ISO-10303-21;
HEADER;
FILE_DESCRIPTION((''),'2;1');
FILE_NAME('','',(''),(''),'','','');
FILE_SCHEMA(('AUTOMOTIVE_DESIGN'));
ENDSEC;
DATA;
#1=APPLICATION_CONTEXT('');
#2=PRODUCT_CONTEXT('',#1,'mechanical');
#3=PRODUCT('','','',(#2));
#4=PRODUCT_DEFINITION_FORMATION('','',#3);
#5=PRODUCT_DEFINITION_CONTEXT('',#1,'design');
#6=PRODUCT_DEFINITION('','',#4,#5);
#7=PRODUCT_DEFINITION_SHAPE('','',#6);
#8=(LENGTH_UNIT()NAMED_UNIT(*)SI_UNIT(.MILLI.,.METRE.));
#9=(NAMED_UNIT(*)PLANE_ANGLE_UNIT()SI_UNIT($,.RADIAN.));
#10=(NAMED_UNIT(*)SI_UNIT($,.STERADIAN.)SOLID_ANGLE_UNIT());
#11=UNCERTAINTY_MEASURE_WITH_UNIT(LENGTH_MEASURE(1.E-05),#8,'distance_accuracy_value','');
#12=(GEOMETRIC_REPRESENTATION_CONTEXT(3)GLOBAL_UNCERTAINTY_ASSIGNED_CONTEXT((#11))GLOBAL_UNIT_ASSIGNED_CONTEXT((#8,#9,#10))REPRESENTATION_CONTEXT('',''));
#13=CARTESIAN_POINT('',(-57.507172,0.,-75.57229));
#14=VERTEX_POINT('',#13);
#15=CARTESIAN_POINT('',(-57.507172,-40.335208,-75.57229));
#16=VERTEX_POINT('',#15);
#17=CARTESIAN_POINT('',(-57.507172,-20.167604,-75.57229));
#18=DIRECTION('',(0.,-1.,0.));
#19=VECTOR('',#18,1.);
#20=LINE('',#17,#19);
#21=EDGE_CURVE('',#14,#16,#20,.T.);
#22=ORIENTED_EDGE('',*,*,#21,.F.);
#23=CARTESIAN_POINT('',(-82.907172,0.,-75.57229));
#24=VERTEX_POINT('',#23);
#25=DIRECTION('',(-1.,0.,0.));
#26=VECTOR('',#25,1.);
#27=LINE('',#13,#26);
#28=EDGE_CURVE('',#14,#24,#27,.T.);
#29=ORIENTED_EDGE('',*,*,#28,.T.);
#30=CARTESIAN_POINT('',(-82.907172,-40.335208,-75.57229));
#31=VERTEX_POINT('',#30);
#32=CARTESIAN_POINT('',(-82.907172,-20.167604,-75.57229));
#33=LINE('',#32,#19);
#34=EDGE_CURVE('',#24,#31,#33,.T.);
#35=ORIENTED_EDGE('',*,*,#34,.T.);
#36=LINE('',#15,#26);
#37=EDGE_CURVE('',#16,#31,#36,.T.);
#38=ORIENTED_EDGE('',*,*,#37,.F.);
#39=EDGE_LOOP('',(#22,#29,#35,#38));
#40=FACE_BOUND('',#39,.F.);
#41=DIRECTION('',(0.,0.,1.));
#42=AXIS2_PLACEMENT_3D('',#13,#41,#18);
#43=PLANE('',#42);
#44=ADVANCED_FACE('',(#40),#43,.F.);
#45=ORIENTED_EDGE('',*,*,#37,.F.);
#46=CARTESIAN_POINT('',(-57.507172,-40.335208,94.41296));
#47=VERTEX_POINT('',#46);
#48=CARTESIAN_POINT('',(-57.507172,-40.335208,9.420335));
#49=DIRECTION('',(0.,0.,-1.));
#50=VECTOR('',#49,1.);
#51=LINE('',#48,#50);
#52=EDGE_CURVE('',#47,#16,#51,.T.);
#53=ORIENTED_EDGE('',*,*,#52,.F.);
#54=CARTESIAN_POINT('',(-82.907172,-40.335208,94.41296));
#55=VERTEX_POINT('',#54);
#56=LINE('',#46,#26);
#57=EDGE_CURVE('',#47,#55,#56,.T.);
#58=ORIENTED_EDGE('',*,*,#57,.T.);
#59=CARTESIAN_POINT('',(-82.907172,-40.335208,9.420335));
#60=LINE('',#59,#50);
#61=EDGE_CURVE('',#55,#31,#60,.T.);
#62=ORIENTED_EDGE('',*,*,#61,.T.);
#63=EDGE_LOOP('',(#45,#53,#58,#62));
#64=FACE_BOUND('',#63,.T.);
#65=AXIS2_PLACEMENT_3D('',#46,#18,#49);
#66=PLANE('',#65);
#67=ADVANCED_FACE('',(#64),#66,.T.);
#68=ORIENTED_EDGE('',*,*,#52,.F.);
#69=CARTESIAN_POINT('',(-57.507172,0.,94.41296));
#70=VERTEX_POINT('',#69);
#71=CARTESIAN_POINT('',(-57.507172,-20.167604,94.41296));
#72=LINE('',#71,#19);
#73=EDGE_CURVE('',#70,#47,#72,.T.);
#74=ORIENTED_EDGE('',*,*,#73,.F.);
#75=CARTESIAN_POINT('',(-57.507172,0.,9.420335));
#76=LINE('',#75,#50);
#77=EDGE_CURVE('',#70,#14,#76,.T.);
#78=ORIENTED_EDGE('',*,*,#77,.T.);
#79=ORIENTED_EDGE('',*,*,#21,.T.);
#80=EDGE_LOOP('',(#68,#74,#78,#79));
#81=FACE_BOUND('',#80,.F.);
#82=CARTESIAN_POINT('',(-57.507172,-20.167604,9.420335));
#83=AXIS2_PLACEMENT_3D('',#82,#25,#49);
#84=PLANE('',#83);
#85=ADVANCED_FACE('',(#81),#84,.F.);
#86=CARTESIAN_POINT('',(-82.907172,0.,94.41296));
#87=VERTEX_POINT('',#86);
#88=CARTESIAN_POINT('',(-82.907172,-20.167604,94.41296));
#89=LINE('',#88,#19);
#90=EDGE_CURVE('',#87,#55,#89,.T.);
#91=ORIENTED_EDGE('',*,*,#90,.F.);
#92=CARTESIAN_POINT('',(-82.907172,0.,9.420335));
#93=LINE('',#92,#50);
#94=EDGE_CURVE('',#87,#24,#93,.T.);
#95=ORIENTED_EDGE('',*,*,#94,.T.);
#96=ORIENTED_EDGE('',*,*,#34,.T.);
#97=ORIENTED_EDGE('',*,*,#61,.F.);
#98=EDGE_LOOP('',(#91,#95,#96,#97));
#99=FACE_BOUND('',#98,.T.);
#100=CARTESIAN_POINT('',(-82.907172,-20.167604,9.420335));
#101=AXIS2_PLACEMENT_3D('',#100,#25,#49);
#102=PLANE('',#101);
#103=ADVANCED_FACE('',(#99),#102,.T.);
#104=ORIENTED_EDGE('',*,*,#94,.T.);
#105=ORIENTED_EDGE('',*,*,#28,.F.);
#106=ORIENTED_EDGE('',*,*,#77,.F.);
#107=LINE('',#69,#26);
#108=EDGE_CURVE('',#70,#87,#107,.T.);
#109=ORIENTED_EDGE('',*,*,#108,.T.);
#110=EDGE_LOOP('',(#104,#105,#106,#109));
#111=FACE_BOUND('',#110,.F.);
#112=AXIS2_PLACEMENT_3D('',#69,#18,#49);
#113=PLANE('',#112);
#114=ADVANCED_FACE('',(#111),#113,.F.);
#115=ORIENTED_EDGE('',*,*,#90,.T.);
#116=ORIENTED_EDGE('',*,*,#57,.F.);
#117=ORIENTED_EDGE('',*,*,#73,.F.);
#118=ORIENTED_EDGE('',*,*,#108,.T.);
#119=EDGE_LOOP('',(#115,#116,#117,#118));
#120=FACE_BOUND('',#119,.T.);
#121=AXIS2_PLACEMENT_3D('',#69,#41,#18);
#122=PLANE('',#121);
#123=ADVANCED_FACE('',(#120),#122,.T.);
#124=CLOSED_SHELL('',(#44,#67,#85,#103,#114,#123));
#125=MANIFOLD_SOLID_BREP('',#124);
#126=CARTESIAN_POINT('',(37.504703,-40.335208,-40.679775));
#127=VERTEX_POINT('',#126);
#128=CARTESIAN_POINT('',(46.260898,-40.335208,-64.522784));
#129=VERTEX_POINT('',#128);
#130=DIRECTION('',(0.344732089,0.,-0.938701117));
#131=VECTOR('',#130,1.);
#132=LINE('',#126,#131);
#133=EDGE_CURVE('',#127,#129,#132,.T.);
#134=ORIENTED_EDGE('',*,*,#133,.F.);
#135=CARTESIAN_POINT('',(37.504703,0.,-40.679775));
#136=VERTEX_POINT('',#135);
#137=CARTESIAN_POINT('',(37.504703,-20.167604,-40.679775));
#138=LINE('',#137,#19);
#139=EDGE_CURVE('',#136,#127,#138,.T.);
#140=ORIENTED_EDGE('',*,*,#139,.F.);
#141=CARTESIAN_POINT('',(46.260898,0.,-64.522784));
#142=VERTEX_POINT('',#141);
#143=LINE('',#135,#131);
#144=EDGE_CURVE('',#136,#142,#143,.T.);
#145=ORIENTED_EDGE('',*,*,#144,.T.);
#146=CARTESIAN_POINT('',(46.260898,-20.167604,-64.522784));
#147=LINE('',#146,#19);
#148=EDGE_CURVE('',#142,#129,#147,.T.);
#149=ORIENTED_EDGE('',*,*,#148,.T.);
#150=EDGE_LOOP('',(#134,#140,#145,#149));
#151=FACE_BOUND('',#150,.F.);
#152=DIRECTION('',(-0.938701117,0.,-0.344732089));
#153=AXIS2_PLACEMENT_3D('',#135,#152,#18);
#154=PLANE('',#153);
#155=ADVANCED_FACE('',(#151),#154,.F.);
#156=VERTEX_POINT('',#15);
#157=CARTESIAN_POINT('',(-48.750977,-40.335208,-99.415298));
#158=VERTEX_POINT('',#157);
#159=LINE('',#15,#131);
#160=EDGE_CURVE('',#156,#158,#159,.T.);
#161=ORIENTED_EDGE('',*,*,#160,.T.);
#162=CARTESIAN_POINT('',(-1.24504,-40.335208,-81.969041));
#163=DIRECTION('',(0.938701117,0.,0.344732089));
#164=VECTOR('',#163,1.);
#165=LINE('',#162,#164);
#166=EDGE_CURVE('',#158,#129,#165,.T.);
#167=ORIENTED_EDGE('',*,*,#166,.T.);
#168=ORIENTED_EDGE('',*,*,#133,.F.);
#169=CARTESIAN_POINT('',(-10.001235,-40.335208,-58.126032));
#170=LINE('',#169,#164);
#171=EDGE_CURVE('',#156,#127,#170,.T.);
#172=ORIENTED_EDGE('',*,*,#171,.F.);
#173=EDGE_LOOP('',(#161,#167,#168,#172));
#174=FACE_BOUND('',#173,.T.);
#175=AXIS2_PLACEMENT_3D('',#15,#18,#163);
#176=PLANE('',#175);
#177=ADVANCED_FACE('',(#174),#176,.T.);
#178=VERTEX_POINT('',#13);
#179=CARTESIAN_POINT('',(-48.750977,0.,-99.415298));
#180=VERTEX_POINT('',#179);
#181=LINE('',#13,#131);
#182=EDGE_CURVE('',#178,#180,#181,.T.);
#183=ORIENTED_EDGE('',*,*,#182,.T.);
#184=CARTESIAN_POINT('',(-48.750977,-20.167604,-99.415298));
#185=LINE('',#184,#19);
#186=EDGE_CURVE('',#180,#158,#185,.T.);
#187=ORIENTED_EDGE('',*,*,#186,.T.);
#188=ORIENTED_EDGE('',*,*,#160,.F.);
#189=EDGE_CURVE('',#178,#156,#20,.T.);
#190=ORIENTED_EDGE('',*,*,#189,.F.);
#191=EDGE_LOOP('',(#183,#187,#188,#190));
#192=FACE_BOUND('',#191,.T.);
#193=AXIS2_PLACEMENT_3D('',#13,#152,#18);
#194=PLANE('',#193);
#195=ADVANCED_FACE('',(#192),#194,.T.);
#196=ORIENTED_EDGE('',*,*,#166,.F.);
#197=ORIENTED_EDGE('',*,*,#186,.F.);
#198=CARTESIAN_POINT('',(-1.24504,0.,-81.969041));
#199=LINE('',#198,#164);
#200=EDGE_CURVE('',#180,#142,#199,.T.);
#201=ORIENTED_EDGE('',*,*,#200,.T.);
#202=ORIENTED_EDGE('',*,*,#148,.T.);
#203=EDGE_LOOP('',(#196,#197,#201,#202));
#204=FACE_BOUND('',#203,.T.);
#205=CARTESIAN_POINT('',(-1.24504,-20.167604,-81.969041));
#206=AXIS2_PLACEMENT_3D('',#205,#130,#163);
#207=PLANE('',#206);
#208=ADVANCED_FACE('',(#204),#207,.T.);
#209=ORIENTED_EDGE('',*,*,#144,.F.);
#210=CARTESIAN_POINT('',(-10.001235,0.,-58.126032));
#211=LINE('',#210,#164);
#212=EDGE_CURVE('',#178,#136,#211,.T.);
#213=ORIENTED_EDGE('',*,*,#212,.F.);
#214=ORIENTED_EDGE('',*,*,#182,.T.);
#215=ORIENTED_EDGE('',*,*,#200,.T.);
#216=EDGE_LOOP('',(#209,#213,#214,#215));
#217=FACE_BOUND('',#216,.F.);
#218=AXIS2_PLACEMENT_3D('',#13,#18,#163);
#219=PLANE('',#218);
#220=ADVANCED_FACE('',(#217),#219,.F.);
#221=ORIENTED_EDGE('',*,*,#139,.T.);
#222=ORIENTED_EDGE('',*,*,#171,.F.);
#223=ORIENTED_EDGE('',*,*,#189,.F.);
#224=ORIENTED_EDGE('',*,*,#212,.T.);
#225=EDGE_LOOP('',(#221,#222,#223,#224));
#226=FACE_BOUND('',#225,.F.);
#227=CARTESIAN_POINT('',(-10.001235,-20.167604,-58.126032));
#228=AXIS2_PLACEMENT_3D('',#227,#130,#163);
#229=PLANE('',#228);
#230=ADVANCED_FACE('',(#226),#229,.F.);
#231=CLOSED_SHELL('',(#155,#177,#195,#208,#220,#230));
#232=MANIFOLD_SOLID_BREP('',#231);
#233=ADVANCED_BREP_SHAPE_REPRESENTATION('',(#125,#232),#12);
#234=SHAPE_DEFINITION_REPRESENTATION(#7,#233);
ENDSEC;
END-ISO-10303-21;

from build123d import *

# Parameters (mm, degrees)
F1_E1_W  = 101.2163225714
F1_E1_H  = 40.3352081776
F2_DEPTH = 25.4
F1_E0_W  = 169.9852496386
F1_E0_H  = 40.3352081776
F3_DEPTH = 25.4


with BuildPart() as f2:
    # F1_E1 (on explicit) → F2 (new body)
    with BuildSketch(Plane(origin=(-57.5071722269, 0, -75.5722895265), x_dir=(0.9387011168, 0, 0.3447320893), z_dir=(0.3447320893, 0, -0.9387011168))):
        with Locations((50.6081612857, 20.1676040888)):
            Rectangle(F1_E1_W, F1_E1_H)
    extrude(amount=F2_DEPTH)


with BuildPart() as f3:
    # F1_E0 (on explicit) → F3 (new body)
    with BuildSketch(Plane(origin=(-57.5071722269, 0, 94.4129601121), x_dir=(0, 0, -1), z_dir=(-1, 0, 0))):
        with Locations((84.9926248193, 20.1676040888)):
            Rectangle(F1_E0_W, F1_E0_H)
    extrude(amount=F3_DEPTH)


solid = Compound([f2.part, f3.part])
